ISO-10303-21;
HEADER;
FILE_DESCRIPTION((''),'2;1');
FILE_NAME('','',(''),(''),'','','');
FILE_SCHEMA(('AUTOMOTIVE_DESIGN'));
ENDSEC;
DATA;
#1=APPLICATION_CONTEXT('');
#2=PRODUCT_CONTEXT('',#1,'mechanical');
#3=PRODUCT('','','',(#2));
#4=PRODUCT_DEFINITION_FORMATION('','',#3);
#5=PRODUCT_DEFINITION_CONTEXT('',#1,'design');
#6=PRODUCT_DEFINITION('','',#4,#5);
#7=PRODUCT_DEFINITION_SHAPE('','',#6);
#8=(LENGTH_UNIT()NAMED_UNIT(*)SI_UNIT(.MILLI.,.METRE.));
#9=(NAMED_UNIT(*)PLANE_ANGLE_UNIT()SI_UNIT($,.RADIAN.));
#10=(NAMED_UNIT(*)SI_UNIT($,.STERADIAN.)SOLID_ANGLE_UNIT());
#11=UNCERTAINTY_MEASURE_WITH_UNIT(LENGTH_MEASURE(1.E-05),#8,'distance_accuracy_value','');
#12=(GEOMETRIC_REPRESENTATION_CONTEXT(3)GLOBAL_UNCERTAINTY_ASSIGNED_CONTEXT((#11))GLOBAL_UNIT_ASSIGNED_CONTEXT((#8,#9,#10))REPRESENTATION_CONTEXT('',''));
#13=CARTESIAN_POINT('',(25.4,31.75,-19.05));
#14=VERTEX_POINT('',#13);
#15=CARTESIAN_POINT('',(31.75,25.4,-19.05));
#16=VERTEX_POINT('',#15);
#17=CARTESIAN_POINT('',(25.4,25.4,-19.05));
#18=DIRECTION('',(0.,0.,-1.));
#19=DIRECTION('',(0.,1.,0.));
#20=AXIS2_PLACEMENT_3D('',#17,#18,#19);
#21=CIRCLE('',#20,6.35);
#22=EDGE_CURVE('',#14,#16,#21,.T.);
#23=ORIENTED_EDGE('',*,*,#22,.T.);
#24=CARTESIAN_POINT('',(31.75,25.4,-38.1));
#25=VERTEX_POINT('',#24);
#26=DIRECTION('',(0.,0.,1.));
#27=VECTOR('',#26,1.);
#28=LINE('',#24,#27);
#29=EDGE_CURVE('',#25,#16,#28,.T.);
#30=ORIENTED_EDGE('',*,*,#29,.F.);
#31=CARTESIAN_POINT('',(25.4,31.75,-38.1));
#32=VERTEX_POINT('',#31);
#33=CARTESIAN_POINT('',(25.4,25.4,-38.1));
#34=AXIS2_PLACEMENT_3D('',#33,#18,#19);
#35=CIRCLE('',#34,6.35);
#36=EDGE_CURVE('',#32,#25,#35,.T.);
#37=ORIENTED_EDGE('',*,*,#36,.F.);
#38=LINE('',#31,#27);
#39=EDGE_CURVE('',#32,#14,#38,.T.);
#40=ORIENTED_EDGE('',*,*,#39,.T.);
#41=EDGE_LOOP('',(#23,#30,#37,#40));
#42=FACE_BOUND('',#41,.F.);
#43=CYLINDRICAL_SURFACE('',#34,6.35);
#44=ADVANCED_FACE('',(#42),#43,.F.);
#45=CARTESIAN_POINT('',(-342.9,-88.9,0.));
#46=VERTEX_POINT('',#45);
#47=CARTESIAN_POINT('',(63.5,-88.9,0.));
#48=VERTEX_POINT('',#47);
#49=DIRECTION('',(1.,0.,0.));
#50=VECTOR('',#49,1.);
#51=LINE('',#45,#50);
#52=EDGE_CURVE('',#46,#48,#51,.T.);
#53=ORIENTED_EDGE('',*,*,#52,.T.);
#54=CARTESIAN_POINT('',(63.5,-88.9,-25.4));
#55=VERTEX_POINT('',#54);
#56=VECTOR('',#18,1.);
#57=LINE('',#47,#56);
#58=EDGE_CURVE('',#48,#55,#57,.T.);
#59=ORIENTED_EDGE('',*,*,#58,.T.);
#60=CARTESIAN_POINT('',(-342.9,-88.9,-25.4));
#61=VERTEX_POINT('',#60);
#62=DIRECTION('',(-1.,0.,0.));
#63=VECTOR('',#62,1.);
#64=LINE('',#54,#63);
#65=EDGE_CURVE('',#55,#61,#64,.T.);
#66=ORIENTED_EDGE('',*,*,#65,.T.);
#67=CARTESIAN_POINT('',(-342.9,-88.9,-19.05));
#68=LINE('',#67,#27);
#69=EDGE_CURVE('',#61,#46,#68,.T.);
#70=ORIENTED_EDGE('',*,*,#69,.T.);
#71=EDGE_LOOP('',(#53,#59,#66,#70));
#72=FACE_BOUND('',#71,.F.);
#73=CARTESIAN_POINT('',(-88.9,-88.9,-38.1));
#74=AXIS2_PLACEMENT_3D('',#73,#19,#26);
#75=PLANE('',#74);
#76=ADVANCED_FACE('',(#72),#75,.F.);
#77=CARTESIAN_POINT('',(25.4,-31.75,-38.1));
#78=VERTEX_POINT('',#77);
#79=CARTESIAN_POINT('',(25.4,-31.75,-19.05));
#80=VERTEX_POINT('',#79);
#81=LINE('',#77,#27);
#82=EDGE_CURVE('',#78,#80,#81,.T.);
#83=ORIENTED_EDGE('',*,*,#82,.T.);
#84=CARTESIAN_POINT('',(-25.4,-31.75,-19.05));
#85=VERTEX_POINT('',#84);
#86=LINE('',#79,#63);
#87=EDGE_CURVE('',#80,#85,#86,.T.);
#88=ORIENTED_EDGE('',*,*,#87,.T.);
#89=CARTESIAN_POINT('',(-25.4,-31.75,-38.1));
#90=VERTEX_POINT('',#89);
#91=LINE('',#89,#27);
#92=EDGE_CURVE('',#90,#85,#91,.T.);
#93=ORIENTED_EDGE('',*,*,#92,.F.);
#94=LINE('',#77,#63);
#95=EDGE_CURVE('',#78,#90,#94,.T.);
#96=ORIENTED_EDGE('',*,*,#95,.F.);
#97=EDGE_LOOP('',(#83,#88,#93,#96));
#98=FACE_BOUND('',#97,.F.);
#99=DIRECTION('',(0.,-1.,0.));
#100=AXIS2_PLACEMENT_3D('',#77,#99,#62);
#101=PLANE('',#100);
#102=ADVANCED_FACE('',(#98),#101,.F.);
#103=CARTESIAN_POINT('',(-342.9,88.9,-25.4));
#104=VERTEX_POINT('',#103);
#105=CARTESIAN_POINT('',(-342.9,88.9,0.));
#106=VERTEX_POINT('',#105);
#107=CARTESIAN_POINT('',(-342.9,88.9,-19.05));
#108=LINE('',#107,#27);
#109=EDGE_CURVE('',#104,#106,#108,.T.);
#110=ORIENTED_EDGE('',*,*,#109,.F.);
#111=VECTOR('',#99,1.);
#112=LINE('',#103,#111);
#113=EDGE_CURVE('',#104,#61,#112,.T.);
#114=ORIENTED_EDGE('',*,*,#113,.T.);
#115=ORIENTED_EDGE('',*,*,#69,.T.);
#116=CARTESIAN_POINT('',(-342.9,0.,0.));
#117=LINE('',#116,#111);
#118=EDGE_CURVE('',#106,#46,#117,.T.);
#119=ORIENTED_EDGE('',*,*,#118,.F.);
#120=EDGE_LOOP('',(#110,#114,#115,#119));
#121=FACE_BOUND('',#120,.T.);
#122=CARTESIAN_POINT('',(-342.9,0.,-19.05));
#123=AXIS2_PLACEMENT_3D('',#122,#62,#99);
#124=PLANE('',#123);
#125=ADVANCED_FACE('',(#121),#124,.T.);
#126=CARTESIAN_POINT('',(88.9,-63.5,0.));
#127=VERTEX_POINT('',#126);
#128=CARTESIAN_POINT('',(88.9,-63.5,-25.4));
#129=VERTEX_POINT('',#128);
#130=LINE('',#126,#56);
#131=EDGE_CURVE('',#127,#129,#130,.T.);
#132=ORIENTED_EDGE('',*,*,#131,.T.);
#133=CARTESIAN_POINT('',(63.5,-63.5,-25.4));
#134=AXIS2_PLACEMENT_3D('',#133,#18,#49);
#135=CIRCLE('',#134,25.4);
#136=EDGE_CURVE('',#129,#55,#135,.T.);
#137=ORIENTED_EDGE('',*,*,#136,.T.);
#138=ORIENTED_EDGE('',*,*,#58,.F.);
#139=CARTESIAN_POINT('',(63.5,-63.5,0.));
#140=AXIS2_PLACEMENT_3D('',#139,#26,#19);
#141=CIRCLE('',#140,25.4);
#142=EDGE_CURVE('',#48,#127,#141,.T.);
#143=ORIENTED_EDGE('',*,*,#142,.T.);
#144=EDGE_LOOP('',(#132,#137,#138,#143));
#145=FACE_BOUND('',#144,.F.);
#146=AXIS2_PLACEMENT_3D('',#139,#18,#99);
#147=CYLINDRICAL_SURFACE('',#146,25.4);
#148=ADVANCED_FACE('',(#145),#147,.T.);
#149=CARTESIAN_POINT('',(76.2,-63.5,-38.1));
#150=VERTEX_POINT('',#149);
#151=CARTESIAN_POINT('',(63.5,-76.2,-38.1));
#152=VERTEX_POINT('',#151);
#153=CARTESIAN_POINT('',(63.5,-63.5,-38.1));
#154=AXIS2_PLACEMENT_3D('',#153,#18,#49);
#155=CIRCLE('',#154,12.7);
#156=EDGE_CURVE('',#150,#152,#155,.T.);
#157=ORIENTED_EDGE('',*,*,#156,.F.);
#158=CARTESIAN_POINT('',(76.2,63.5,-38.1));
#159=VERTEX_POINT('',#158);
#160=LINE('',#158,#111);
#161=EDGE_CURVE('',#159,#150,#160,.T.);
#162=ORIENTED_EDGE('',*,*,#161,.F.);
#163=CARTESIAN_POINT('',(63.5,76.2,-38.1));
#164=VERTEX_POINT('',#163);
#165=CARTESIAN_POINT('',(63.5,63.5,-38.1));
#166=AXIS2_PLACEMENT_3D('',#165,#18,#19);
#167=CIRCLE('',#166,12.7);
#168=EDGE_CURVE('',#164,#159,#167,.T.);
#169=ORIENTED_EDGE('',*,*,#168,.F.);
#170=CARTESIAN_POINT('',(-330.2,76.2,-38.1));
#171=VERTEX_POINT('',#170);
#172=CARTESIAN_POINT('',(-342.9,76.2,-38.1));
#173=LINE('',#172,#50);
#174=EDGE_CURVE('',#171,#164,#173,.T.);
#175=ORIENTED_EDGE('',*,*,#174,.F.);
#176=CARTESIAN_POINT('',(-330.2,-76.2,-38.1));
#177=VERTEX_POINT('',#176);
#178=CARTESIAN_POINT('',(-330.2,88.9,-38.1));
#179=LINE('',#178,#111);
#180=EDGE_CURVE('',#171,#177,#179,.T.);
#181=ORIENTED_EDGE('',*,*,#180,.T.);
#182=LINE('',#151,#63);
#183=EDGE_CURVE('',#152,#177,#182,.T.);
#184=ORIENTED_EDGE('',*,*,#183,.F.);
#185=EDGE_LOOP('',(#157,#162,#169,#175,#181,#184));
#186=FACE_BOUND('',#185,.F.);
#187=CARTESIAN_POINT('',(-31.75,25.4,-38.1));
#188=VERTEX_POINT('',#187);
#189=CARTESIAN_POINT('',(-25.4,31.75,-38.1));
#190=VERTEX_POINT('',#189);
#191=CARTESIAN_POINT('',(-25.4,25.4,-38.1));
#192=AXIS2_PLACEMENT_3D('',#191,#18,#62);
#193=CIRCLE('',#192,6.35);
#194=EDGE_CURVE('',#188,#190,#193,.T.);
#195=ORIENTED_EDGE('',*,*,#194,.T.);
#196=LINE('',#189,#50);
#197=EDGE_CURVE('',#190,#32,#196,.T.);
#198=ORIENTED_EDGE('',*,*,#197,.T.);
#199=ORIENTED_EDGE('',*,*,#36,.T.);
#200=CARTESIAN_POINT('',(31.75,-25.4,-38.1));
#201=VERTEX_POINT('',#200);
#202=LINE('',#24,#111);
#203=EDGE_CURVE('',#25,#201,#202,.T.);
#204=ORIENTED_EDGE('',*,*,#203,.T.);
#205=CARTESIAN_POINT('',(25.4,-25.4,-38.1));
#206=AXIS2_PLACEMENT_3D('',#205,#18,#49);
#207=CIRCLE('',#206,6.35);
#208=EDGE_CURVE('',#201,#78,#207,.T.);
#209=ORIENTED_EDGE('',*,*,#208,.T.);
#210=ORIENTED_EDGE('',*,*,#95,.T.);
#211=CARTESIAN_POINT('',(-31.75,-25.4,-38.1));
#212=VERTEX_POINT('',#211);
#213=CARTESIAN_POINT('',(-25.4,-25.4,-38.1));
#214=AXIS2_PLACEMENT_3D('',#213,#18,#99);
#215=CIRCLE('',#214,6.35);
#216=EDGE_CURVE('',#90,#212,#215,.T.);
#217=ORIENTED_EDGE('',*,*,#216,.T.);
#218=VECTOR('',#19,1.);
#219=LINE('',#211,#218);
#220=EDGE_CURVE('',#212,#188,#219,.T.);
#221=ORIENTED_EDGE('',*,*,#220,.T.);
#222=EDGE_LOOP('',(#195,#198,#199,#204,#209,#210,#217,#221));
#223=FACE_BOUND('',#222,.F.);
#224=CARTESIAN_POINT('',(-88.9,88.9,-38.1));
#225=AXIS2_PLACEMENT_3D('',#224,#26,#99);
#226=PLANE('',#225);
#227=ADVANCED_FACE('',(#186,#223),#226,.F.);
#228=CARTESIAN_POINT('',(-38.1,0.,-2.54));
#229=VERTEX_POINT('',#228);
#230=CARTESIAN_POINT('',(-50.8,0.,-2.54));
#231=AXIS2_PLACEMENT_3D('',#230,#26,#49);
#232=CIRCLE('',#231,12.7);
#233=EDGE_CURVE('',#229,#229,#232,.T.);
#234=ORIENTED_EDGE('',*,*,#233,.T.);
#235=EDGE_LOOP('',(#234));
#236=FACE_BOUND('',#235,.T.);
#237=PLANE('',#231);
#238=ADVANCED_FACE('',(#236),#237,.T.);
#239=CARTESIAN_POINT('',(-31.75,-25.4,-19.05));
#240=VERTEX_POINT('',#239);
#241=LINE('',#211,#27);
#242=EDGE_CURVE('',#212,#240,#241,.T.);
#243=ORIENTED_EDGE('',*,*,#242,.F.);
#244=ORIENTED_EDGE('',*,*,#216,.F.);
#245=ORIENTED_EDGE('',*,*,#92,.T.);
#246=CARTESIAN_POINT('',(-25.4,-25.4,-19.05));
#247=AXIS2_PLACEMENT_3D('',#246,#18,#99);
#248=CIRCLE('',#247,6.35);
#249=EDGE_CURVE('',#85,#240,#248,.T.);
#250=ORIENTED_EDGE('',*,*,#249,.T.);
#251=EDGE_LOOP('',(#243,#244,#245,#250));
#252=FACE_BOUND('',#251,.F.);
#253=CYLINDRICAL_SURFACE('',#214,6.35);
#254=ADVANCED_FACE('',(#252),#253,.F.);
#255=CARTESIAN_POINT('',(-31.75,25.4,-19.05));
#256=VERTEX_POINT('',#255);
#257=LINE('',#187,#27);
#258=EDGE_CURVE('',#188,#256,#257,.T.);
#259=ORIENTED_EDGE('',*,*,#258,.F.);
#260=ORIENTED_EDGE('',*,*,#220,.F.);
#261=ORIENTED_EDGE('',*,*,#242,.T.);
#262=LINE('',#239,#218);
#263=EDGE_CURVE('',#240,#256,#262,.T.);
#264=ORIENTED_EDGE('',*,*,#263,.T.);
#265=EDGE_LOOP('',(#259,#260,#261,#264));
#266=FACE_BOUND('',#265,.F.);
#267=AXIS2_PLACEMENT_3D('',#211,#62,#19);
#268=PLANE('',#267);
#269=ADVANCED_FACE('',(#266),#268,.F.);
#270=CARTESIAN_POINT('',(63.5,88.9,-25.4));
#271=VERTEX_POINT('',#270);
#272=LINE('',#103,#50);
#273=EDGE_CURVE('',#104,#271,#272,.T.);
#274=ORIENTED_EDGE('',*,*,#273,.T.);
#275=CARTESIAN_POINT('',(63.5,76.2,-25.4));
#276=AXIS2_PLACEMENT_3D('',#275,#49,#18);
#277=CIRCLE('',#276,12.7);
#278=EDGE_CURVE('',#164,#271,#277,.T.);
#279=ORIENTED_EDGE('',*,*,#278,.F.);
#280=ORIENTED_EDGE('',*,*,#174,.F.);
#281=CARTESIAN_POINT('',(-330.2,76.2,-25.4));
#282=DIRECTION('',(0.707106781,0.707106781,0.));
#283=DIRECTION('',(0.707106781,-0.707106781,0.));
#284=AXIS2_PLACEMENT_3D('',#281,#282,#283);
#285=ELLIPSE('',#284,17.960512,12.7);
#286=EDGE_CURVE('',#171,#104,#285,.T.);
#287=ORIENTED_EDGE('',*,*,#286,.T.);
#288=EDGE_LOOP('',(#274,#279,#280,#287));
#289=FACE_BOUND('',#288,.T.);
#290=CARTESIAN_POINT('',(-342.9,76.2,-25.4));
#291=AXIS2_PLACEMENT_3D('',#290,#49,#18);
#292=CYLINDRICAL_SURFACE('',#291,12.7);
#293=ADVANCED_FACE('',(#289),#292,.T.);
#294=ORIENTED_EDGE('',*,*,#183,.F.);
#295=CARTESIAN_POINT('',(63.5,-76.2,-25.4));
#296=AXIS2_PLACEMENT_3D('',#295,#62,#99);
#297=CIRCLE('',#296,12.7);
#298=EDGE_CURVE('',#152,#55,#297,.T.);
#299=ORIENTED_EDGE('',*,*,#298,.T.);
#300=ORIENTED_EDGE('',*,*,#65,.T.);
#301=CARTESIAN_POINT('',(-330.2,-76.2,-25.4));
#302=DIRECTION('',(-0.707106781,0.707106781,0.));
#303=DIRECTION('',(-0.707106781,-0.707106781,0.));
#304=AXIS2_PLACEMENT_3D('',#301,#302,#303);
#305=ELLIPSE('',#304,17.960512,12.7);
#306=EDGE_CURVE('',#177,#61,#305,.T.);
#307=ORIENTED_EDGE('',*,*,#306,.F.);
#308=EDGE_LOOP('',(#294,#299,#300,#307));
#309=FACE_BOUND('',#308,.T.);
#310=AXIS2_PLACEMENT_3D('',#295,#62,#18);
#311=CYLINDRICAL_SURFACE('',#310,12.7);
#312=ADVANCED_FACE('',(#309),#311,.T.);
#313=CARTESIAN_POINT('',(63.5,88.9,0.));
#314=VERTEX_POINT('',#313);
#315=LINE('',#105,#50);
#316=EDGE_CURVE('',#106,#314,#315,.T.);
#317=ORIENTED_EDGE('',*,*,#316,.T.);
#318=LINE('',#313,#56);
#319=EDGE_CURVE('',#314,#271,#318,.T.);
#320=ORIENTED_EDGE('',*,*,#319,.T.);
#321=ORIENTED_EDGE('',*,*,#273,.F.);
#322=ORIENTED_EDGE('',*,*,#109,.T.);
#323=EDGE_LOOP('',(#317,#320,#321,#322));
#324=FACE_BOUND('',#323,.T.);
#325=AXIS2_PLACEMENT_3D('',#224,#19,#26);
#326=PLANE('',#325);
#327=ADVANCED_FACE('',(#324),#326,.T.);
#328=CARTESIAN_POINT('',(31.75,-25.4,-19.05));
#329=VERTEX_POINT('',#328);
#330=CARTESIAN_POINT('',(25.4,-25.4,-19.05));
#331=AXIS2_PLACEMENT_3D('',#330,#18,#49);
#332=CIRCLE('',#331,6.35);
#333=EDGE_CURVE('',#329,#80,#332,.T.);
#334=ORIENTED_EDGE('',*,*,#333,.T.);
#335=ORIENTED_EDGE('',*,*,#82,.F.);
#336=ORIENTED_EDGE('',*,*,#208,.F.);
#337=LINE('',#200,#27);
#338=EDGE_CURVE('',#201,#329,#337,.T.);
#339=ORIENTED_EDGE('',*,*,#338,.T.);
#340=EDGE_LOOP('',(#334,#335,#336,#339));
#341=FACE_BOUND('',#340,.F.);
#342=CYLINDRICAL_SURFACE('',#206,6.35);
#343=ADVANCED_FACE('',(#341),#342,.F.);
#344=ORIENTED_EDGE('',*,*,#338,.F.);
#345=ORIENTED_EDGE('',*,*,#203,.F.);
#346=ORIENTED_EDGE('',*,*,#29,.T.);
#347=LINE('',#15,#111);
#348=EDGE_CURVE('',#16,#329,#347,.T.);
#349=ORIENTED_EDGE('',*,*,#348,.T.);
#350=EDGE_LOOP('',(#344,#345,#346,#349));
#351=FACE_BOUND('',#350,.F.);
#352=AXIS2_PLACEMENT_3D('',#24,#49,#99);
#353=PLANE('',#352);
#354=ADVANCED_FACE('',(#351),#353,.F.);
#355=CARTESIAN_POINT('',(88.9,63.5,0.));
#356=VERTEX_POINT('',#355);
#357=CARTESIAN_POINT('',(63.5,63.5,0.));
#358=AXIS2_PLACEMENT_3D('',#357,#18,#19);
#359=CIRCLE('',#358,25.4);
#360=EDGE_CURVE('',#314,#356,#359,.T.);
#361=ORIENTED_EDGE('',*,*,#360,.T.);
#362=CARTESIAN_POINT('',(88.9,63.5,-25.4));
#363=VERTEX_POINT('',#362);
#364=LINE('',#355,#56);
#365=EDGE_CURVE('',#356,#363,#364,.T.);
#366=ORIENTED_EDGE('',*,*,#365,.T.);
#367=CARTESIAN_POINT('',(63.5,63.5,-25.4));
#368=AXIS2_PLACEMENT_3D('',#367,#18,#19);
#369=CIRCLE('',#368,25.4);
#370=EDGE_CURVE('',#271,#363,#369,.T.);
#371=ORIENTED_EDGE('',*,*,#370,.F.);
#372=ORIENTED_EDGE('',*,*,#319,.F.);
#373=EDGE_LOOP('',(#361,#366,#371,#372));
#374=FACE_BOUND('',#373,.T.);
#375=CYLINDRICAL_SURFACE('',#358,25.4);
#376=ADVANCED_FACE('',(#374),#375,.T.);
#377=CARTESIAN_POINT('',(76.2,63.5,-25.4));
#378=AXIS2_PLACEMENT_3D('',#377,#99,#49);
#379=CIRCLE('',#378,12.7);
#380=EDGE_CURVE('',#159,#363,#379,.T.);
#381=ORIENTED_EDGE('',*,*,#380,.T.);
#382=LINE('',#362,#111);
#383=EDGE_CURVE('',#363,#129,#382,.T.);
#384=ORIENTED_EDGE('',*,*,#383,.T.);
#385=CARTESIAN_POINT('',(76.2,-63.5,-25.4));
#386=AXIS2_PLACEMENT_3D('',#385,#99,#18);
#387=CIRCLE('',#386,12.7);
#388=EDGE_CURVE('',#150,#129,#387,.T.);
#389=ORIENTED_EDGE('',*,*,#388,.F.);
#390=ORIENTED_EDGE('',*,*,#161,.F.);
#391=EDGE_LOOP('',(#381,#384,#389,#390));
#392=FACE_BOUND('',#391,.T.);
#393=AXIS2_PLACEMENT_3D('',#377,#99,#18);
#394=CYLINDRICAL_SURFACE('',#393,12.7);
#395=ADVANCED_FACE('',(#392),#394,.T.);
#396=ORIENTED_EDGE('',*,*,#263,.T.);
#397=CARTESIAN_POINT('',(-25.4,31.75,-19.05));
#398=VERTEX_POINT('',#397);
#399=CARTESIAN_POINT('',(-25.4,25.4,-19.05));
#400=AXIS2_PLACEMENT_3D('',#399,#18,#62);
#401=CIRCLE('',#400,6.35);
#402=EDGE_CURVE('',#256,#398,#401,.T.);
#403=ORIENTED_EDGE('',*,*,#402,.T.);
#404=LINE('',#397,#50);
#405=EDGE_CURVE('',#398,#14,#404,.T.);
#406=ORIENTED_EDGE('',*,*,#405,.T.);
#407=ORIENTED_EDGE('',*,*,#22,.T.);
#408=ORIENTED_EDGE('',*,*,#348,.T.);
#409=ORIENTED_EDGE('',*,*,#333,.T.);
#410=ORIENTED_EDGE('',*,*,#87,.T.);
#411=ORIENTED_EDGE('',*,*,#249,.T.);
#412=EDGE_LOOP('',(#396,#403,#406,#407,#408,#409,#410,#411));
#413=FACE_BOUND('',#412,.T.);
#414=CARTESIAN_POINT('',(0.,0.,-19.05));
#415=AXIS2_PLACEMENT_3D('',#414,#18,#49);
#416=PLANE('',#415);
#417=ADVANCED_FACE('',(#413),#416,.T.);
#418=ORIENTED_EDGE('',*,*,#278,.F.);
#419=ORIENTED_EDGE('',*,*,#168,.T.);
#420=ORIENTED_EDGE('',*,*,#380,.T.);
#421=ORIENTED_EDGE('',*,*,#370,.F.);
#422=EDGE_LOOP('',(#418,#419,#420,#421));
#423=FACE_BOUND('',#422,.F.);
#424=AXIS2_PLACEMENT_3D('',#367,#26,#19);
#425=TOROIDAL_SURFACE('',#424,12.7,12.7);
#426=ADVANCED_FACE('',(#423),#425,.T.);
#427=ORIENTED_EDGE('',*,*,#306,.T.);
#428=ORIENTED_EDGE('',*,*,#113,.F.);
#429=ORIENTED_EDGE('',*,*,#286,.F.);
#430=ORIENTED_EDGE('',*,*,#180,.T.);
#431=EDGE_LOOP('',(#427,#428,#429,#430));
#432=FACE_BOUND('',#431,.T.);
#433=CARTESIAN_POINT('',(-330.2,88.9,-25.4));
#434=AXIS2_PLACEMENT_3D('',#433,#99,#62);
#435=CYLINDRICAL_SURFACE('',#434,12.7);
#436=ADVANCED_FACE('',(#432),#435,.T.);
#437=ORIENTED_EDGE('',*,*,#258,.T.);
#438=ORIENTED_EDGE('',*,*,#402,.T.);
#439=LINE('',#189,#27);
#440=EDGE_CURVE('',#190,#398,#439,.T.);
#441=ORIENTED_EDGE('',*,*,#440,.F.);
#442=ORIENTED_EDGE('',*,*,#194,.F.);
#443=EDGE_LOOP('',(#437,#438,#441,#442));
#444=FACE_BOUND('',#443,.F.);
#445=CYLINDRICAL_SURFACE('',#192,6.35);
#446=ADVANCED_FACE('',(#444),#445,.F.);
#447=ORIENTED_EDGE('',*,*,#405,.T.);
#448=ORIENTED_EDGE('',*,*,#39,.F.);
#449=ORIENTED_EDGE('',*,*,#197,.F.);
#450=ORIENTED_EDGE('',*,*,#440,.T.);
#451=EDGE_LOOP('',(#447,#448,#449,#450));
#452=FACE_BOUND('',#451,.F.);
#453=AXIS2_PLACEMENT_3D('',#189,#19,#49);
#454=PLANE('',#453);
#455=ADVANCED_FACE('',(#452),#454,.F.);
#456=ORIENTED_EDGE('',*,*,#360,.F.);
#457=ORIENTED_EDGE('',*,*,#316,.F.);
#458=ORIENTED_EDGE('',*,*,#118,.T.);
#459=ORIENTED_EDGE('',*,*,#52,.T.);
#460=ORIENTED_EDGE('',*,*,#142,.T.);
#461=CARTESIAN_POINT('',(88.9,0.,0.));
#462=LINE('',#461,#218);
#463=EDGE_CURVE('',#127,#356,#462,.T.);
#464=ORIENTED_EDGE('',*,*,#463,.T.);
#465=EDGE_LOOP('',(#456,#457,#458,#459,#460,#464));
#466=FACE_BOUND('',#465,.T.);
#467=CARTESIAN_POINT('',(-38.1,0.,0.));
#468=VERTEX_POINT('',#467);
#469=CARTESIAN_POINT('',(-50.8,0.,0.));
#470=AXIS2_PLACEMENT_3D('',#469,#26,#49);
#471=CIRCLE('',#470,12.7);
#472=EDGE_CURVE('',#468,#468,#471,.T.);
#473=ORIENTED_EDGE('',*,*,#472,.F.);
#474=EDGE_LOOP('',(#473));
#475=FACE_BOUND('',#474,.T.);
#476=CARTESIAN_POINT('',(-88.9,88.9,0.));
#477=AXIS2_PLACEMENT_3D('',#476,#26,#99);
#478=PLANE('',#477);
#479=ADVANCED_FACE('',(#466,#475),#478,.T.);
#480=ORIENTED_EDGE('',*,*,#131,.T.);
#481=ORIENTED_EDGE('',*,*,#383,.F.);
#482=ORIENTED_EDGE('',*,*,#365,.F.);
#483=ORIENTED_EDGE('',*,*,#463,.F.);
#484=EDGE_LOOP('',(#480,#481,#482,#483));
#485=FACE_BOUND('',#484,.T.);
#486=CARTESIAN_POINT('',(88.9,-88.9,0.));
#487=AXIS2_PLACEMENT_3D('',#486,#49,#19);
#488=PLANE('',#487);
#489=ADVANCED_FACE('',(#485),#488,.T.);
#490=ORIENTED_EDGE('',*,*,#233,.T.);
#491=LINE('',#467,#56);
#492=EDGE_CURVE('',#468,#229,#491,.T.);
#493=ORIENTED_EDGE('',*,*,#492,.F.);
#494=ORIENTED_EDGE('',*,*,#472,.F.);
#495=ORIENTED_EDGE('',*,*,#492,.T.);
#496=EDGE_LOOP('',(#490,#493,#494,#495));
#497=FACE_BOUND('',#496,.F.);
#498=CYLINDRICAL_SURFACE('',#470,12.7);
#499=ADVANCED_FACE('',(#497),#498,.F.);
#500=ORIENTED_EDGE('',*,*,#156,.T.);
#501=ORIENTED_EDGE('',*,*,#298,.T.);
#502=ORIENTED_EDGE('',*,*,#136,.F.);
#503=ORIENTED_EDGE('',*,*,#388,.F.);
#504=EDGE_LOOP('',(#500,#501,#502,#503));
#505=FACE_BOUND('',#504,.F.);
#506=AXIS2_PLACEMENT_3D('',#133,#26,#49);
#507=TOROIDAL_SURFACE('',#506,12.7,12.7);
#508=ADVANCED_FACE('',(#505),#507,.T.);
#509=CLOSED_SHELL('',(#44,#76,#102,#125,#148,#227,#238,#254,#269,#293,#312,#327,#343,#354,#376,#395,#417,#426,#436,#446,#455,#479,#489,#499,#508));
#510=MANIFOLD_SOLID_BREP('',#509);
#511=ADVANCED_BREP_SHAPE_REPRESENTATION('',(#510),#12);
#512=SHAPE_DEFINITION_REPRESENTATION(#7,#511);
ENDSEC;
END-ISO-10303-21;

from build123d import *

# Parameters (mm, degrees)
F0_W     = 177.8
F0_H     = 177.8
F1_DEPTH = 38.1
F2_W     = 177.8
F2_H     = 38.1
F3_DEPTH = 254
F4_R     = 25.4
F5_R     = 12.7
F7_DEPTH = 19.05
F8_R     = 12.7
F9_DEPTH = 2.54


with BuildPart() as f1:
    # F0 (on Top) → F1 (new body)
    with BuildSketch(Plane.XY):
        Rectangle(F0_W, F0_H)
    extrude(amount=-F1_DEPTH)

    # F2 (on face) → F3 (join)
    with BuildSketch(Plane(origin=(-88.9, 0, 0), x_dir=(0, -1, 0), z_dir=(-1, 0, 0))):
        with Locations((0, -19.05)):
            Rectangle(F2_W, F2_H)
    extrude(amount=F3_DEPTH)

    # F4
    f4_edges = [f1.edges().sort_by_distance(p)[0] for p in [
        (88.9, 88.9, -19.05),
        (88.9, -88.9, -19.05),
    ]]
    fillet(f4_edges, radius=F4_R)

    # F5
    f5_edges = [f1.edges().sort_by_distance(p)[0] for p in [
        (-139.7, -88.9, -38.1),
        (-342.9, 0, -38.1),
        (-139.7, 88.9, -38.1),
        (81.460512, 81.460512, -38.1),
        (88.9, 0, -38.1),
        (81.460512, -81.460512, -38.1),
    ]]
    fillet(f5_edges, radius=F5_R)

    # F6 (on face) → F7 (cut)
    with BuildSketch(Plane(origin=(0, 0, -38.1), x_dir=(1, 0, 0), z_dir=(0, 0, -1))):
        with BuildLine():
            Line((-25.4, -31.75), (25.4, -31.75))
            ThreePointArc((25.4, -31.75), (29.8901280605, -29.8901280605), (31.75, -25.4))
            Line((31.75, -25.4), (31.75, 25.4))
            ThreePointArc((31.75, 25.4), (29.8901280605, 29.8901280605), (25.4, 31.75))
            Line((25.4, 31.75), (-25.4, 31.75))
            ThreePointArc((-25.4, 31.75), (-29.8901280605, 29.8901280605), (-31.75, 25.4))
            Line((-31.75, 25.4), (-31.75, -25.4))
            ThreePointArc((-31.75, -25.4), (-29.8901280605, -29.8901280605), (-25.4, -31.75))
        make_face()
    extrude(amount=-F7_DEPTH, mode=Mode.SUBTRACT)

    # F8 (on face) → F9 (cut)
    with BuildSketch(Plane.XY):
        with Locations((-50.8, 0)):
            Circle(F8_R)
    extrude(amount=-F9_DEPTH, mode=Mode.SUBTRACT)


solid = f1.part
